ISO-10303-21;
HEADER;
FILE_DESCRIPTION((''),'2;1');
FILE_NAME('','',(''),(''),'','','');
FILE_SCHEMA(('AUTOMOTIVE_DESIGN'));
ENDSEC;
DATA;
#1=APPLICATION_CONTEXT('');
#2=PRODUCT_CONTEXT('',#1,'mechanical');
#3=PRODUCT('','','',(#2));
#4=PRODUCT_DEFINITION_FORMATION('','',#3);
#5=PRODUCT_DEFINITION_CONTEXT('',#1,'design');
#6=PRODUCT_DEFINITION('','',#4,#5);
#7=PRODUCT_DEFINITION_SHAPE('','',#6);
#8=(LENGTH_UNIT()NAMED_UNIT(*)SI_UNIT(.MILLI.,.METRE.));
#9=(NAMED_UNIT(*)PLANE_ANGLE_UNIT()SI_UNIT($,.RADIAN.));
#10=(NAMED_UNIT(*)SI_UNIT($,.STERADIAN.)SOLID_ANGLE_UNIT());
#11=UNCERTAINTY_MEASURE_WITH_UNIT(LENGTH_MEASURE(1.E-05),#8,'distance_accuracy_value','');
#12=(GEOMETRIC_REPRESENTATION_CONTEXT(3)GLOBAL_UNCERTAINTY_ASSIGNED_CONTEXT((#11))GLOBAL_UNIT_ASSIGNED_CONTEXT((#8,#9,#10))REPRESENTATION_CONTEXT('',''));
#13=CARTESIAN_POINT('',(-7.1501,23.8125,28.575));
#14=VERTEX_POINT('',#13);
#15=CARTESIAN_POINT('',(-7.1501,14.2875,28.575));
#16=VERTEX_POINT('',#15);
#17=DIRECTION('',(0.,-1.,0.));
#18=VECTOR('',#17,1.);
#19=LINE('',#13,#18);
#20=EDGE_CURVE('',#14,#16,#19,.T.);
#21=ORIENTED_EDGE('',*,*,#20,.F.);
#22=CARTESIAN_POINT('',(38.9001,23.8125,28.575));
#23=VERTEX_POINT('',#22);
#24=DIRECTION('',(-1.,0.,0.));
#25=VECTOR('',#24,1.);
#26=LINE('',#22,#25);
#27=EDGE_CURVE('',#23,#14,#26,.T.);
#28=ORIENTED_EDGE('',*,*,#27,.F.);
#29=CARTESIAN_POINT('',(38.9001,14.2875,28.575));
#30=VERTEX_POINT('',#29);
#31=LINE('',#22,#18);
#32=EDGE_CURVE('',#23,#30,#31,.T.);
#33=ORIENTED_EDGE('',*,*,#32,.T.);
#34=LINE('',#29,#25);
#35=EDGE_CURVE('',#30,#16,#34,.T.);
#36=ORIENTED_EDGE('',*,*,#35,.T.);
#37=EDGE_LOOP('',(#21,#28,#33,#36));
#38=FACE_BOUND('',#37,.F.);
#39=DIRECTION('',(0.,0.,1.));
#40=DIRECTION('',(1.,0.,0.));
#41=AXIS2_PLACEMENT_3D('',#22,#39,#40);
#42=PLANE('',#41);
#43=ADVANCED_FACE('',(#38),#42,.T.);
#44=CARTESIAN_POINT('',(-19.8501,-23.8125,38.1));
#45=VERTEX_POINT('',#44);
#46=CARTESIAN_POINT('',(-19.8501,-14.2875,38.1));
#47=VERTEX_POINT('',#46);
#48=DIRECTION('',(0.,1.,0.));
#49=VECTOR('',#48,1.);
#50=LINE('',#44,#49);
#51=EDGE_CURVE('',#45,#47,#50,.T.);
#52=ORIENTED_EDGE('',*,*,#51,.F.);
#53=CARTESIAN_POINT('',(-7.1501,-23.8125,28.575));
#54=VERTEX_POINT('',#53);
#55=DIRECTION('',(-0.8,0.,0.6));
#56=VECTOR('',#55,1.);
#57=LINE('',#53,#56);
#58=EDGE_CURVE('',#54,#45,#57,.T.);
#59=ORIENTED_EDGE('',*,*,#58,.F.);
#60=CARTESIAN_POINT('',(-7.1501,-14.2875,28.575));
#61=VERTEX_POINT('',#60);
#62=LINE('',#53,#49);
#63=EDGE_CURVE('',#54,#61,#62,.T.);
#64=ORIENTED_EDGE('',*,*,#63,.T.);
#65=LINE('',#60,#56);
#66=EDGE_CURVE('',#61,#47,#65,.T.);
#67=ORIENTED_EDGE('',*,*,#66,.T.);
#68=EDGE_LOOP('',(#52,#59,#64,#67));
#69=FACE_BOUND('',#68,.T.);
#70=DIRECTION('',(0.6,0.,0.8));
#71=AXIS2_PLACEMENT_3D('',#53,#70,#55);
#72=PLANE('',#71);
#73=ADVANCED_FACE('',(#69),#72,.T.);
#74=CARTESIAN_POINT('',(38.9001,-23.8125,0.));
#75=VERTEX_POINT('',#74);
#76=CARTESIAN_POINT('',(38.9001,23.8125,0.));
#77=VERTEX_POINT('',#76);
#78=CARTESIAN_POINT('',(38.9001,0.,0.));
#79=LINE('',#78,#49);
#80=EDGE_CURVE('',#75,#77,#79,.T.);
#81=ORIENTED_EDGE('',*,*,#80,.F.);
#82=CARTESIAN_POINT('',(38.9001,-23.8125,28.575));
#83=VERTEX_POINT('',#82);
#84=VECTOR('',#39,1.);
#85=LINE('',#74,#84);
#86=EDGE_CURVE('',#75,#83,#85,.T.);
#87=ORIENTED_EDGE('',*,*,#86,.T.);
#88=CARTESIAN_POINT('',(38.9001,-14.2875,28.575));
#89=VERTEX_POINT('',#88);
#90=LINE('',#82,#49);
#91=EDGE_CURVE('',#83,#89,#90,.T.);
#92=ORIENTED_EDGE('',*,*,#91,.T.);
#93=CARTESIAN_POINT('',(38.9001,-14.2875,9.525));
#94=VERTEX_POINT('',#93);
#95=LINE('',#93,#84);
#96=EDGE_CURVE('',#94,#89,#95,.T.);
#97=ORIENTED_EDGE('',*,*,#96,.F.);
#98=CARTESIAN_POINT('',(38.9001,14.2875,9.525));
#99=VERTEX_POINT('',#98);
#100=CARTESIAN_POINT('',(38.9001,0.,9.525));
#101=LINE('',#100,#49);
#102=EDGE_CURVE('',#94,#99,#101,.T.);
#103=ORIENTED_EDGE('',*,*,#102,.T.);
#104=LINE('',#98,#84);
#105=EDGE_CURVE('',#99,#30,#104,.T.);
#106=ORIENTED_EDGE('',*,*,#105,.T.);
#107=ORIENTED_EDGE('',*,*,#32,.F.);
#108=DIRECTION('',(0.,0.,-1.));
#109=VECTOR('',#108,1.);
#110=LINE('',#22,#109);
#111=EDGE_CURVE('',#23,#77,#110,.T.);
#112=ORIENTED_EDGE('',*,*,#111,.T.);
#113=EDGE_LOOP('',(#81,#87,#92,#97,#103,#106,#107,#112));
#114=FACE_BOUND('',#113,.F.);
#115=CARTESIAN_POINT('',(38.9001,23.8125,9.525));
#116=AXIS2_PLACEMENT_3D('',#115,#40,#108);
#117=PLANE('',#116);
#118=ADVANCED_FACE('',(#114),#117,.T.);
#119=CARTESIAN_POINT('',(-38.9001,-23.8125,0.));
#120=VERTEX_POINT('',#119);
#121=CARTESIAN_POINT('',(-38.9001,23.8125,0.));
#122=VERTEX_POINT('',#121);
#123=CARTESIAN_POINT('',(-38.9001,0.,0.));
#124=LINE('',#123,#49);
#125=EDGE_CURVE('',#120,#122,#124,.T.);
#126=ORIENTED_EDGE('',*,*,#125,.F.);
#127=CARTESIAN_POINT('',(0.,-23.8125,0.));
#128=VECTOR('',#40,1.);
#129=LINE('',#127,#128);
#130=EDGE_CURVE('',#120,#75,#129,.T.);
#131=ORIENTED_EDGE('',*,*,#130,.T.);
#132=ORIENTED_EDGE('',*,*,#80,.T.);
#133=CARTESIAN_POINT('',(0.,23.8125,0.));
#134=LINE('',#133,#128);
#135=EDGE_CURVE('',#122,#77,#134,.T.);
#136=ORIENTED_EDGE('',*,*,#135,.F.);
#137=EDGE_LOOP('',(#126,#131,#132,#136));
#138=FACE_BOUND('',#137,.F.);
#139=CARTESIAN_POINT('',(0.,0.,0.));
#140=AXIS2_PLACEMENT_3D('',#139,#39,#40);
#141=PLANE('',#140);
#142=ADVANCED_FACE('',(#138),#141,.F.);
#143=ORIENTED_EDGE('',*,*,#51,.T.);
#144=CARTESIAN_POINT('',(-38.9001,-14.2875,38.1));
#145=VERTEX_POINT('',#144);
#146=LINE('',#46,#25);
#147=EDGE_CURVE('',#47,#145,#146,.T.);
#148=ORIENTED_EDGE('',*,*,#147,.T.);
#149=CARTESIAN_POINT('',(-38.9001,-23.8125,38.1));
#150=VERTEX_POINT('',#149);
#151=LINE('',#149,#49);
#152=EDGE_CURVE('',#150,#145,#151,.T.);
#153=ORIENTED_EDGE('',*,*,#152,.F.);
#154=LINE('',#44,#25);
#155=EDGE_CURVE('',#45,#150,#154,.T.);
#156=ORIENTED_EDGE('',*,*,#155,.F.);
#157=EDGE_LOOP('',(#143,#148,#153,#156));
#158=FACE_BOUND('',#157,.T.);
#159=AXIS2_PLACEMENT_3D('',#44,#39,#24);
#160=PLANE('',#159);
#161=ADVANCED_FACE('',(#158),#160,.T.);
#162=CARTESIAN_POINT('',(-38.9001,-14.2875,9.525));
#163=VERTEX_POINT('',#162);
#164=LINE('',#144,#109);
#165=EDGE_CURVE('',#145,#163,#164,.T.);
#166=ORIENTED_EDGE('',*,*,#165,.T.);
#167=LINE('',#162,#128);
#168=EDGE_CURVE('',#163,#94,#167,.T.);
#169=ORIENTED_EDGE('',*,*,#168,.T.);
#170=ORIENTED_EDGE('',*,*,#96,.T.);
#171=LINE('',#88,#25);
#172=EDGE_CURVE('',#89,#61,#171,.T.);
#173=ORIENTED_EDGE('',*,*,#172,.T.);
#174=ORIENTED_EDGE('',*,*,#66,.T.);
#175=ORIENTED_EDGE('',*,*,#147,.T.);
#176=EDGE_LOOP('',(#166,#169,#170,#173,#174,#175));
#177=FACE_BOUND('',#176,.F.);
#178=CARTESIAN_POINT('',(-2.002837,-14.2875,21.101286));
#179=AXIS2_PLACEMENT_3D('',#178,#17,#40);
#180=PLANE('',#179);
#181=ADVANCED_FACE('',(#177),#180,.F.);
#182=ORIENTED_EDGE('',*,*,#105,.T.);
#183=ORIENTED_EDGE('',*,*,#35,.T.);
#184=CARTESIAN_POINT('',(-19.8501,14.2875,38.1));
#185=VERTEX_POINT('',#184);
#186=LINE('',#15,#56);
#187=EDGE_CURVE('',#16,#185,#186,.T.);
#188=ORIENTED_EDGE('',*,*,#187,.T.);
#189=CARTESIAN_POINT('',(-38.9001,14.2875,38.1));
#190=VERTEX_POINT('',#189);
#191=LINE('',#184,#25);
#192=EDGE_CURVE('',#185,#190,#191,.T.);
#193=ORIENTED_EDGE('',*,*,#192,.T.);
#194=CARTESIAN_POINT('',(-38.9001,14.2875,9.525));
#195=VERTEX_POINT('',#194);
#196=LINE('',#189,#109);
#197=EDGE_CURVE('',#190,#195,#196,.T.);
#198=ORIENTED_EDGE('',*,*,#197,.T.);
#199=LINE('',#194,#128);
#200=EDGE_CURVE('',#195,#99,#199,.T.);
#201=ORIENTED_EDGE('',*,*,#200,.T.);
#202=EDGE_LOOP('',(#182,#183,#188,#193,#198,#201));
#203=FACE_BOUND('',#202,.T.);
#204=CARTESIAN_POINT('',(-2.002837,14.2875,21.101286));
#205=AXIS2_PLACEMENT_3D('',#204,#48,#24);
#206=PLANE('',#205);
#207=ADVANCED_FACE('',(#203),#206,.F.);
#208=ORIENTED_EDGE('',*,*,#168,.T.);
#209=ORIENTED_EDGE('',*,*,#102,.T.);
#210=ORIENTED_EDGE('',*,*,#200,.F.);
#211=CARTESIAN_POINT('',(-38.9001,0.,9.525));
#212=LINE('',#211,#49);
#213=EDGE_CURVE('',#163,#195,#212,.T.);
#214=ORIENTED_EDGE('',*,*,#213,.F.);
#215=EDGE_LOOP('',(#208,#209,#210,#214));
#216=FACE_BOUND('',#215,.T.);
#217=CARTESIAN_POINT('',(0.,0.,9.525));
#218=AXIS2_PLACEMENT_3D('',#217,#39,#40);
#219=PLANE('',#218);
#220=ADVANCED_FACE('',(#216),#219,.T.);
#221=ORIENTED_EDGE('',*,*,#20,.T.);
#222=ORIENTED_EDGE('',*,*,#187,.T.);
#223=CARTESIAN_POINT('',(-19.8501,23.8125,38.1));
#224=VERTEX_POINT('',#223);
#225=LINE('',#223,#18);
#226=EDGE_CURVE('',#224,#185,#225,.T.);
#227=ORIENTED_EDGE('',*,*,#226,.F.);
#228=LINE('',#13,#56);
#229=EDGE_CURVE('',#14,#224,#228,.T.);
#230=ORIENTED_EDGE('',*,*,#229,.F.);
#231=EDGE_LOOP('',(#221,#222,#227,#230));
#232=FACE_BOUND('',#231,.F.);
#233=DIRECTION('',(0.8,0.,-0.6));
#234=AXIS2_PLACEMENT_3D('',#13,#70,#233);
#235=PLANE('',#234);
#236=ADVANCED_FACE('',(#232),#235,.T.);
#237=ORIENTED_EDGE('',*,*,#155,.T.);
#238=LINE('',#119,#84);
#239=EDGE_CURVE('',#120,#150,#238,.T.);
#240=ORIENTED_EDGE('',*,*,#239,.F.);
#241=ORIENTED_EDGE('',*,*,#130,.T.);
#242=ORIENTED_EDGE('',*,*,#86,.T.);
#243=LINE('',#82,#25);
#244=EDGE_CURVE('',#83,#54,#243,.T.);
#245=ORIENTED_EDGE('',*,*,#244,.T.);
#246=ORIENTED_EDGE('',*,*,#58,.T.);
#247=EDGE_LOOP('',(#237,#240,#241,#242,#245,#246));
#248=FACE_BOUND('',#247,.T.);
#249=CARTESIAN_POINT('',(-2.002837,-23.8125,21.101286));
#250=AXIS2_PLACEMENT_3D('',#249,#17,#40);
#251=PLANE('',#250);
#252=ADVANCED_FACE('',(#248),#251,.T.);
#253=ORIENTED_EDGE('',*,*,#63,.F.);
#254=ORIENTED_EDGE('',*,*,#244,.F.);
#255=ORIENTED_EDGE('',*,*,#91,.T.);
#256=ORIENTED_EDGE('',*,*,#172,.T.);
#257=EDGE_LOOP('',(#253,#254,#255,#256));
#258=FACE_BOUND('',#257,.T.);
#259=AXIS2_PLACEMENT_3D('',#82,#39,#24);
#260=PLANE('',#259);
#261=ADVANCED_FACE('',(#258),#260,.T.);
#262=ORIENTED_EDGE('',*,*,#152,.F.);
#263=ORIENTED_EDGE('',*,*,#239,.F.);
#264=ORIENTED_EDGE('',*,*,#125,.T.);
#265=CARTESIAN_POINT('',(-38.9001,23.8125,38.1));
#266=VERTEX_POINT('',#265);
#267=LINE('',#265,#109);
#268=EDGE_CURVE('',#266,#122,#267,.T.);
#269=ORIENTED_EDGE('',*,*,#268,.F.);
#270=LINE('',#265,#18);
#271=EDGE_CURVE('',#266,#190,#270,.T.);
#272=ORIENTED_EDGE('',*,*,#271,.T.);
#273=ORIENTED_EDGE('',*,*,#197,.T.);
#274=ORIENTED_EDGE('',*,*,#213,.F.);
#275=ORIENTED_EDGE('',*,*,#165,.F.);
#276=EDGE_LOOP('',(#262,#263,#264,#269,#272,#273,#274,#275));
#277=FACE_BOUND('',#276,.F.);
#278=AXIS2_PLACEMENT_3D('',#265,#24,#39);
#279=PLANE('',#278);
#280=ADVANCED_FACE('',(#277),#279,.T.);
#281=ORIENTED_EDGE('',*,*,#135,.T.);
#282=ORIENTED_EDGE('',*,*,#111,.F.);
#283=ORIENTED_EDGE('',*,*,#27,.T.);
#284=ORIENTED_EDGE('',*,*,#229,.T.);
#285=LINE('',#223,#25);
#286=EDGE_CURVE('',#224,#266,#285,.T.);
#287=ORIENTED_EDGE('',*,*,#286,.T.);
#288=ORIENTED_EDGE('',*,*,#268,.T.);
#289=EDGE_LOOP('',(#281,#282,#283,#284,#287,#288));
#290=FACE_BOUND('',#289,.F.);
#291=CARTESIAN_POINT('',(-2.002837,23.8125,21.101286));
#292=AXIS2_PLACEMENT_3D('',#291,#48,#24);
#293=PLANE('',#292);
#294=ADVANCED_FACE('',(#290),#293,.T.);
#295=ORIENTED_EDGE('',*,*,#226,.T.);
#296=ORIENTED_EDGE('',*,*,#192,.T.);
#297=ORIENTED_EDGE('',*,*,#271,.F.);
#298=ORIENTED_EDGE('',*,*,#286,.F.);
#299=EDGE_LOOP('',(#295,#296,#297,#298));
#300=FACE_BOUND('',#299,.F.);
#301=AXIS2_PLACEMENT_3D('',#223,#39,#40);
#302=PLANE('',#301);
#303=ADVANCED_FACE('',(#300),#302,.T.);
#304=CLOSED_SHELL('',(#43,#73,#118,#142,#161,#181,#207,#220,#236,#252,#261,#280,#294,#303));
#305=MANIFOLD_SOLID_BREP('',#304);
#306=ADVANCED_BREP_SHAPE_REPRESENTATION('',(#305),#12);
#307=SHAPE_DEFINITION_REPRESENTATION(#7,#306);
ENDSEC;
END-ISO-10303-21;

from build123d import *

# Parameters (mm, degrees)
F0_W     = 77.8002
F0_H     = 47.625
F1_DEPTH = 9.525
F3_DEPTH = 9.525


# Not quite as in the source:
# - a pattern or mirror of a feature is missing from the dataset's text; its kind, count and spacing are read off the source's solid


with BuildPart() as f1:
    # F0 (on Top) → F1 (new body)
    with BuildSketch(Plane.XY):
        Rectangle(F0_W, F0_H)
    extrude(amount=F1_DEPTH)

    # F2 (on face) → F3 (join)
    with BuildSketch(Plane.XZ.offset(23.8125)):
        Polygon((-38.9001, 38.1), (-38.9001, 9.525), (38.9001, 9.525), (38.9001, 28.575), (-7.1501, 28.575), (-19.8501, 38.1), align=None)
    f3 = extrude(amount=-F3_DEPTH)

    # F3_copies: F3 across plane
    add(f3.mirror(Plane.ZX))


solid = f1.part
